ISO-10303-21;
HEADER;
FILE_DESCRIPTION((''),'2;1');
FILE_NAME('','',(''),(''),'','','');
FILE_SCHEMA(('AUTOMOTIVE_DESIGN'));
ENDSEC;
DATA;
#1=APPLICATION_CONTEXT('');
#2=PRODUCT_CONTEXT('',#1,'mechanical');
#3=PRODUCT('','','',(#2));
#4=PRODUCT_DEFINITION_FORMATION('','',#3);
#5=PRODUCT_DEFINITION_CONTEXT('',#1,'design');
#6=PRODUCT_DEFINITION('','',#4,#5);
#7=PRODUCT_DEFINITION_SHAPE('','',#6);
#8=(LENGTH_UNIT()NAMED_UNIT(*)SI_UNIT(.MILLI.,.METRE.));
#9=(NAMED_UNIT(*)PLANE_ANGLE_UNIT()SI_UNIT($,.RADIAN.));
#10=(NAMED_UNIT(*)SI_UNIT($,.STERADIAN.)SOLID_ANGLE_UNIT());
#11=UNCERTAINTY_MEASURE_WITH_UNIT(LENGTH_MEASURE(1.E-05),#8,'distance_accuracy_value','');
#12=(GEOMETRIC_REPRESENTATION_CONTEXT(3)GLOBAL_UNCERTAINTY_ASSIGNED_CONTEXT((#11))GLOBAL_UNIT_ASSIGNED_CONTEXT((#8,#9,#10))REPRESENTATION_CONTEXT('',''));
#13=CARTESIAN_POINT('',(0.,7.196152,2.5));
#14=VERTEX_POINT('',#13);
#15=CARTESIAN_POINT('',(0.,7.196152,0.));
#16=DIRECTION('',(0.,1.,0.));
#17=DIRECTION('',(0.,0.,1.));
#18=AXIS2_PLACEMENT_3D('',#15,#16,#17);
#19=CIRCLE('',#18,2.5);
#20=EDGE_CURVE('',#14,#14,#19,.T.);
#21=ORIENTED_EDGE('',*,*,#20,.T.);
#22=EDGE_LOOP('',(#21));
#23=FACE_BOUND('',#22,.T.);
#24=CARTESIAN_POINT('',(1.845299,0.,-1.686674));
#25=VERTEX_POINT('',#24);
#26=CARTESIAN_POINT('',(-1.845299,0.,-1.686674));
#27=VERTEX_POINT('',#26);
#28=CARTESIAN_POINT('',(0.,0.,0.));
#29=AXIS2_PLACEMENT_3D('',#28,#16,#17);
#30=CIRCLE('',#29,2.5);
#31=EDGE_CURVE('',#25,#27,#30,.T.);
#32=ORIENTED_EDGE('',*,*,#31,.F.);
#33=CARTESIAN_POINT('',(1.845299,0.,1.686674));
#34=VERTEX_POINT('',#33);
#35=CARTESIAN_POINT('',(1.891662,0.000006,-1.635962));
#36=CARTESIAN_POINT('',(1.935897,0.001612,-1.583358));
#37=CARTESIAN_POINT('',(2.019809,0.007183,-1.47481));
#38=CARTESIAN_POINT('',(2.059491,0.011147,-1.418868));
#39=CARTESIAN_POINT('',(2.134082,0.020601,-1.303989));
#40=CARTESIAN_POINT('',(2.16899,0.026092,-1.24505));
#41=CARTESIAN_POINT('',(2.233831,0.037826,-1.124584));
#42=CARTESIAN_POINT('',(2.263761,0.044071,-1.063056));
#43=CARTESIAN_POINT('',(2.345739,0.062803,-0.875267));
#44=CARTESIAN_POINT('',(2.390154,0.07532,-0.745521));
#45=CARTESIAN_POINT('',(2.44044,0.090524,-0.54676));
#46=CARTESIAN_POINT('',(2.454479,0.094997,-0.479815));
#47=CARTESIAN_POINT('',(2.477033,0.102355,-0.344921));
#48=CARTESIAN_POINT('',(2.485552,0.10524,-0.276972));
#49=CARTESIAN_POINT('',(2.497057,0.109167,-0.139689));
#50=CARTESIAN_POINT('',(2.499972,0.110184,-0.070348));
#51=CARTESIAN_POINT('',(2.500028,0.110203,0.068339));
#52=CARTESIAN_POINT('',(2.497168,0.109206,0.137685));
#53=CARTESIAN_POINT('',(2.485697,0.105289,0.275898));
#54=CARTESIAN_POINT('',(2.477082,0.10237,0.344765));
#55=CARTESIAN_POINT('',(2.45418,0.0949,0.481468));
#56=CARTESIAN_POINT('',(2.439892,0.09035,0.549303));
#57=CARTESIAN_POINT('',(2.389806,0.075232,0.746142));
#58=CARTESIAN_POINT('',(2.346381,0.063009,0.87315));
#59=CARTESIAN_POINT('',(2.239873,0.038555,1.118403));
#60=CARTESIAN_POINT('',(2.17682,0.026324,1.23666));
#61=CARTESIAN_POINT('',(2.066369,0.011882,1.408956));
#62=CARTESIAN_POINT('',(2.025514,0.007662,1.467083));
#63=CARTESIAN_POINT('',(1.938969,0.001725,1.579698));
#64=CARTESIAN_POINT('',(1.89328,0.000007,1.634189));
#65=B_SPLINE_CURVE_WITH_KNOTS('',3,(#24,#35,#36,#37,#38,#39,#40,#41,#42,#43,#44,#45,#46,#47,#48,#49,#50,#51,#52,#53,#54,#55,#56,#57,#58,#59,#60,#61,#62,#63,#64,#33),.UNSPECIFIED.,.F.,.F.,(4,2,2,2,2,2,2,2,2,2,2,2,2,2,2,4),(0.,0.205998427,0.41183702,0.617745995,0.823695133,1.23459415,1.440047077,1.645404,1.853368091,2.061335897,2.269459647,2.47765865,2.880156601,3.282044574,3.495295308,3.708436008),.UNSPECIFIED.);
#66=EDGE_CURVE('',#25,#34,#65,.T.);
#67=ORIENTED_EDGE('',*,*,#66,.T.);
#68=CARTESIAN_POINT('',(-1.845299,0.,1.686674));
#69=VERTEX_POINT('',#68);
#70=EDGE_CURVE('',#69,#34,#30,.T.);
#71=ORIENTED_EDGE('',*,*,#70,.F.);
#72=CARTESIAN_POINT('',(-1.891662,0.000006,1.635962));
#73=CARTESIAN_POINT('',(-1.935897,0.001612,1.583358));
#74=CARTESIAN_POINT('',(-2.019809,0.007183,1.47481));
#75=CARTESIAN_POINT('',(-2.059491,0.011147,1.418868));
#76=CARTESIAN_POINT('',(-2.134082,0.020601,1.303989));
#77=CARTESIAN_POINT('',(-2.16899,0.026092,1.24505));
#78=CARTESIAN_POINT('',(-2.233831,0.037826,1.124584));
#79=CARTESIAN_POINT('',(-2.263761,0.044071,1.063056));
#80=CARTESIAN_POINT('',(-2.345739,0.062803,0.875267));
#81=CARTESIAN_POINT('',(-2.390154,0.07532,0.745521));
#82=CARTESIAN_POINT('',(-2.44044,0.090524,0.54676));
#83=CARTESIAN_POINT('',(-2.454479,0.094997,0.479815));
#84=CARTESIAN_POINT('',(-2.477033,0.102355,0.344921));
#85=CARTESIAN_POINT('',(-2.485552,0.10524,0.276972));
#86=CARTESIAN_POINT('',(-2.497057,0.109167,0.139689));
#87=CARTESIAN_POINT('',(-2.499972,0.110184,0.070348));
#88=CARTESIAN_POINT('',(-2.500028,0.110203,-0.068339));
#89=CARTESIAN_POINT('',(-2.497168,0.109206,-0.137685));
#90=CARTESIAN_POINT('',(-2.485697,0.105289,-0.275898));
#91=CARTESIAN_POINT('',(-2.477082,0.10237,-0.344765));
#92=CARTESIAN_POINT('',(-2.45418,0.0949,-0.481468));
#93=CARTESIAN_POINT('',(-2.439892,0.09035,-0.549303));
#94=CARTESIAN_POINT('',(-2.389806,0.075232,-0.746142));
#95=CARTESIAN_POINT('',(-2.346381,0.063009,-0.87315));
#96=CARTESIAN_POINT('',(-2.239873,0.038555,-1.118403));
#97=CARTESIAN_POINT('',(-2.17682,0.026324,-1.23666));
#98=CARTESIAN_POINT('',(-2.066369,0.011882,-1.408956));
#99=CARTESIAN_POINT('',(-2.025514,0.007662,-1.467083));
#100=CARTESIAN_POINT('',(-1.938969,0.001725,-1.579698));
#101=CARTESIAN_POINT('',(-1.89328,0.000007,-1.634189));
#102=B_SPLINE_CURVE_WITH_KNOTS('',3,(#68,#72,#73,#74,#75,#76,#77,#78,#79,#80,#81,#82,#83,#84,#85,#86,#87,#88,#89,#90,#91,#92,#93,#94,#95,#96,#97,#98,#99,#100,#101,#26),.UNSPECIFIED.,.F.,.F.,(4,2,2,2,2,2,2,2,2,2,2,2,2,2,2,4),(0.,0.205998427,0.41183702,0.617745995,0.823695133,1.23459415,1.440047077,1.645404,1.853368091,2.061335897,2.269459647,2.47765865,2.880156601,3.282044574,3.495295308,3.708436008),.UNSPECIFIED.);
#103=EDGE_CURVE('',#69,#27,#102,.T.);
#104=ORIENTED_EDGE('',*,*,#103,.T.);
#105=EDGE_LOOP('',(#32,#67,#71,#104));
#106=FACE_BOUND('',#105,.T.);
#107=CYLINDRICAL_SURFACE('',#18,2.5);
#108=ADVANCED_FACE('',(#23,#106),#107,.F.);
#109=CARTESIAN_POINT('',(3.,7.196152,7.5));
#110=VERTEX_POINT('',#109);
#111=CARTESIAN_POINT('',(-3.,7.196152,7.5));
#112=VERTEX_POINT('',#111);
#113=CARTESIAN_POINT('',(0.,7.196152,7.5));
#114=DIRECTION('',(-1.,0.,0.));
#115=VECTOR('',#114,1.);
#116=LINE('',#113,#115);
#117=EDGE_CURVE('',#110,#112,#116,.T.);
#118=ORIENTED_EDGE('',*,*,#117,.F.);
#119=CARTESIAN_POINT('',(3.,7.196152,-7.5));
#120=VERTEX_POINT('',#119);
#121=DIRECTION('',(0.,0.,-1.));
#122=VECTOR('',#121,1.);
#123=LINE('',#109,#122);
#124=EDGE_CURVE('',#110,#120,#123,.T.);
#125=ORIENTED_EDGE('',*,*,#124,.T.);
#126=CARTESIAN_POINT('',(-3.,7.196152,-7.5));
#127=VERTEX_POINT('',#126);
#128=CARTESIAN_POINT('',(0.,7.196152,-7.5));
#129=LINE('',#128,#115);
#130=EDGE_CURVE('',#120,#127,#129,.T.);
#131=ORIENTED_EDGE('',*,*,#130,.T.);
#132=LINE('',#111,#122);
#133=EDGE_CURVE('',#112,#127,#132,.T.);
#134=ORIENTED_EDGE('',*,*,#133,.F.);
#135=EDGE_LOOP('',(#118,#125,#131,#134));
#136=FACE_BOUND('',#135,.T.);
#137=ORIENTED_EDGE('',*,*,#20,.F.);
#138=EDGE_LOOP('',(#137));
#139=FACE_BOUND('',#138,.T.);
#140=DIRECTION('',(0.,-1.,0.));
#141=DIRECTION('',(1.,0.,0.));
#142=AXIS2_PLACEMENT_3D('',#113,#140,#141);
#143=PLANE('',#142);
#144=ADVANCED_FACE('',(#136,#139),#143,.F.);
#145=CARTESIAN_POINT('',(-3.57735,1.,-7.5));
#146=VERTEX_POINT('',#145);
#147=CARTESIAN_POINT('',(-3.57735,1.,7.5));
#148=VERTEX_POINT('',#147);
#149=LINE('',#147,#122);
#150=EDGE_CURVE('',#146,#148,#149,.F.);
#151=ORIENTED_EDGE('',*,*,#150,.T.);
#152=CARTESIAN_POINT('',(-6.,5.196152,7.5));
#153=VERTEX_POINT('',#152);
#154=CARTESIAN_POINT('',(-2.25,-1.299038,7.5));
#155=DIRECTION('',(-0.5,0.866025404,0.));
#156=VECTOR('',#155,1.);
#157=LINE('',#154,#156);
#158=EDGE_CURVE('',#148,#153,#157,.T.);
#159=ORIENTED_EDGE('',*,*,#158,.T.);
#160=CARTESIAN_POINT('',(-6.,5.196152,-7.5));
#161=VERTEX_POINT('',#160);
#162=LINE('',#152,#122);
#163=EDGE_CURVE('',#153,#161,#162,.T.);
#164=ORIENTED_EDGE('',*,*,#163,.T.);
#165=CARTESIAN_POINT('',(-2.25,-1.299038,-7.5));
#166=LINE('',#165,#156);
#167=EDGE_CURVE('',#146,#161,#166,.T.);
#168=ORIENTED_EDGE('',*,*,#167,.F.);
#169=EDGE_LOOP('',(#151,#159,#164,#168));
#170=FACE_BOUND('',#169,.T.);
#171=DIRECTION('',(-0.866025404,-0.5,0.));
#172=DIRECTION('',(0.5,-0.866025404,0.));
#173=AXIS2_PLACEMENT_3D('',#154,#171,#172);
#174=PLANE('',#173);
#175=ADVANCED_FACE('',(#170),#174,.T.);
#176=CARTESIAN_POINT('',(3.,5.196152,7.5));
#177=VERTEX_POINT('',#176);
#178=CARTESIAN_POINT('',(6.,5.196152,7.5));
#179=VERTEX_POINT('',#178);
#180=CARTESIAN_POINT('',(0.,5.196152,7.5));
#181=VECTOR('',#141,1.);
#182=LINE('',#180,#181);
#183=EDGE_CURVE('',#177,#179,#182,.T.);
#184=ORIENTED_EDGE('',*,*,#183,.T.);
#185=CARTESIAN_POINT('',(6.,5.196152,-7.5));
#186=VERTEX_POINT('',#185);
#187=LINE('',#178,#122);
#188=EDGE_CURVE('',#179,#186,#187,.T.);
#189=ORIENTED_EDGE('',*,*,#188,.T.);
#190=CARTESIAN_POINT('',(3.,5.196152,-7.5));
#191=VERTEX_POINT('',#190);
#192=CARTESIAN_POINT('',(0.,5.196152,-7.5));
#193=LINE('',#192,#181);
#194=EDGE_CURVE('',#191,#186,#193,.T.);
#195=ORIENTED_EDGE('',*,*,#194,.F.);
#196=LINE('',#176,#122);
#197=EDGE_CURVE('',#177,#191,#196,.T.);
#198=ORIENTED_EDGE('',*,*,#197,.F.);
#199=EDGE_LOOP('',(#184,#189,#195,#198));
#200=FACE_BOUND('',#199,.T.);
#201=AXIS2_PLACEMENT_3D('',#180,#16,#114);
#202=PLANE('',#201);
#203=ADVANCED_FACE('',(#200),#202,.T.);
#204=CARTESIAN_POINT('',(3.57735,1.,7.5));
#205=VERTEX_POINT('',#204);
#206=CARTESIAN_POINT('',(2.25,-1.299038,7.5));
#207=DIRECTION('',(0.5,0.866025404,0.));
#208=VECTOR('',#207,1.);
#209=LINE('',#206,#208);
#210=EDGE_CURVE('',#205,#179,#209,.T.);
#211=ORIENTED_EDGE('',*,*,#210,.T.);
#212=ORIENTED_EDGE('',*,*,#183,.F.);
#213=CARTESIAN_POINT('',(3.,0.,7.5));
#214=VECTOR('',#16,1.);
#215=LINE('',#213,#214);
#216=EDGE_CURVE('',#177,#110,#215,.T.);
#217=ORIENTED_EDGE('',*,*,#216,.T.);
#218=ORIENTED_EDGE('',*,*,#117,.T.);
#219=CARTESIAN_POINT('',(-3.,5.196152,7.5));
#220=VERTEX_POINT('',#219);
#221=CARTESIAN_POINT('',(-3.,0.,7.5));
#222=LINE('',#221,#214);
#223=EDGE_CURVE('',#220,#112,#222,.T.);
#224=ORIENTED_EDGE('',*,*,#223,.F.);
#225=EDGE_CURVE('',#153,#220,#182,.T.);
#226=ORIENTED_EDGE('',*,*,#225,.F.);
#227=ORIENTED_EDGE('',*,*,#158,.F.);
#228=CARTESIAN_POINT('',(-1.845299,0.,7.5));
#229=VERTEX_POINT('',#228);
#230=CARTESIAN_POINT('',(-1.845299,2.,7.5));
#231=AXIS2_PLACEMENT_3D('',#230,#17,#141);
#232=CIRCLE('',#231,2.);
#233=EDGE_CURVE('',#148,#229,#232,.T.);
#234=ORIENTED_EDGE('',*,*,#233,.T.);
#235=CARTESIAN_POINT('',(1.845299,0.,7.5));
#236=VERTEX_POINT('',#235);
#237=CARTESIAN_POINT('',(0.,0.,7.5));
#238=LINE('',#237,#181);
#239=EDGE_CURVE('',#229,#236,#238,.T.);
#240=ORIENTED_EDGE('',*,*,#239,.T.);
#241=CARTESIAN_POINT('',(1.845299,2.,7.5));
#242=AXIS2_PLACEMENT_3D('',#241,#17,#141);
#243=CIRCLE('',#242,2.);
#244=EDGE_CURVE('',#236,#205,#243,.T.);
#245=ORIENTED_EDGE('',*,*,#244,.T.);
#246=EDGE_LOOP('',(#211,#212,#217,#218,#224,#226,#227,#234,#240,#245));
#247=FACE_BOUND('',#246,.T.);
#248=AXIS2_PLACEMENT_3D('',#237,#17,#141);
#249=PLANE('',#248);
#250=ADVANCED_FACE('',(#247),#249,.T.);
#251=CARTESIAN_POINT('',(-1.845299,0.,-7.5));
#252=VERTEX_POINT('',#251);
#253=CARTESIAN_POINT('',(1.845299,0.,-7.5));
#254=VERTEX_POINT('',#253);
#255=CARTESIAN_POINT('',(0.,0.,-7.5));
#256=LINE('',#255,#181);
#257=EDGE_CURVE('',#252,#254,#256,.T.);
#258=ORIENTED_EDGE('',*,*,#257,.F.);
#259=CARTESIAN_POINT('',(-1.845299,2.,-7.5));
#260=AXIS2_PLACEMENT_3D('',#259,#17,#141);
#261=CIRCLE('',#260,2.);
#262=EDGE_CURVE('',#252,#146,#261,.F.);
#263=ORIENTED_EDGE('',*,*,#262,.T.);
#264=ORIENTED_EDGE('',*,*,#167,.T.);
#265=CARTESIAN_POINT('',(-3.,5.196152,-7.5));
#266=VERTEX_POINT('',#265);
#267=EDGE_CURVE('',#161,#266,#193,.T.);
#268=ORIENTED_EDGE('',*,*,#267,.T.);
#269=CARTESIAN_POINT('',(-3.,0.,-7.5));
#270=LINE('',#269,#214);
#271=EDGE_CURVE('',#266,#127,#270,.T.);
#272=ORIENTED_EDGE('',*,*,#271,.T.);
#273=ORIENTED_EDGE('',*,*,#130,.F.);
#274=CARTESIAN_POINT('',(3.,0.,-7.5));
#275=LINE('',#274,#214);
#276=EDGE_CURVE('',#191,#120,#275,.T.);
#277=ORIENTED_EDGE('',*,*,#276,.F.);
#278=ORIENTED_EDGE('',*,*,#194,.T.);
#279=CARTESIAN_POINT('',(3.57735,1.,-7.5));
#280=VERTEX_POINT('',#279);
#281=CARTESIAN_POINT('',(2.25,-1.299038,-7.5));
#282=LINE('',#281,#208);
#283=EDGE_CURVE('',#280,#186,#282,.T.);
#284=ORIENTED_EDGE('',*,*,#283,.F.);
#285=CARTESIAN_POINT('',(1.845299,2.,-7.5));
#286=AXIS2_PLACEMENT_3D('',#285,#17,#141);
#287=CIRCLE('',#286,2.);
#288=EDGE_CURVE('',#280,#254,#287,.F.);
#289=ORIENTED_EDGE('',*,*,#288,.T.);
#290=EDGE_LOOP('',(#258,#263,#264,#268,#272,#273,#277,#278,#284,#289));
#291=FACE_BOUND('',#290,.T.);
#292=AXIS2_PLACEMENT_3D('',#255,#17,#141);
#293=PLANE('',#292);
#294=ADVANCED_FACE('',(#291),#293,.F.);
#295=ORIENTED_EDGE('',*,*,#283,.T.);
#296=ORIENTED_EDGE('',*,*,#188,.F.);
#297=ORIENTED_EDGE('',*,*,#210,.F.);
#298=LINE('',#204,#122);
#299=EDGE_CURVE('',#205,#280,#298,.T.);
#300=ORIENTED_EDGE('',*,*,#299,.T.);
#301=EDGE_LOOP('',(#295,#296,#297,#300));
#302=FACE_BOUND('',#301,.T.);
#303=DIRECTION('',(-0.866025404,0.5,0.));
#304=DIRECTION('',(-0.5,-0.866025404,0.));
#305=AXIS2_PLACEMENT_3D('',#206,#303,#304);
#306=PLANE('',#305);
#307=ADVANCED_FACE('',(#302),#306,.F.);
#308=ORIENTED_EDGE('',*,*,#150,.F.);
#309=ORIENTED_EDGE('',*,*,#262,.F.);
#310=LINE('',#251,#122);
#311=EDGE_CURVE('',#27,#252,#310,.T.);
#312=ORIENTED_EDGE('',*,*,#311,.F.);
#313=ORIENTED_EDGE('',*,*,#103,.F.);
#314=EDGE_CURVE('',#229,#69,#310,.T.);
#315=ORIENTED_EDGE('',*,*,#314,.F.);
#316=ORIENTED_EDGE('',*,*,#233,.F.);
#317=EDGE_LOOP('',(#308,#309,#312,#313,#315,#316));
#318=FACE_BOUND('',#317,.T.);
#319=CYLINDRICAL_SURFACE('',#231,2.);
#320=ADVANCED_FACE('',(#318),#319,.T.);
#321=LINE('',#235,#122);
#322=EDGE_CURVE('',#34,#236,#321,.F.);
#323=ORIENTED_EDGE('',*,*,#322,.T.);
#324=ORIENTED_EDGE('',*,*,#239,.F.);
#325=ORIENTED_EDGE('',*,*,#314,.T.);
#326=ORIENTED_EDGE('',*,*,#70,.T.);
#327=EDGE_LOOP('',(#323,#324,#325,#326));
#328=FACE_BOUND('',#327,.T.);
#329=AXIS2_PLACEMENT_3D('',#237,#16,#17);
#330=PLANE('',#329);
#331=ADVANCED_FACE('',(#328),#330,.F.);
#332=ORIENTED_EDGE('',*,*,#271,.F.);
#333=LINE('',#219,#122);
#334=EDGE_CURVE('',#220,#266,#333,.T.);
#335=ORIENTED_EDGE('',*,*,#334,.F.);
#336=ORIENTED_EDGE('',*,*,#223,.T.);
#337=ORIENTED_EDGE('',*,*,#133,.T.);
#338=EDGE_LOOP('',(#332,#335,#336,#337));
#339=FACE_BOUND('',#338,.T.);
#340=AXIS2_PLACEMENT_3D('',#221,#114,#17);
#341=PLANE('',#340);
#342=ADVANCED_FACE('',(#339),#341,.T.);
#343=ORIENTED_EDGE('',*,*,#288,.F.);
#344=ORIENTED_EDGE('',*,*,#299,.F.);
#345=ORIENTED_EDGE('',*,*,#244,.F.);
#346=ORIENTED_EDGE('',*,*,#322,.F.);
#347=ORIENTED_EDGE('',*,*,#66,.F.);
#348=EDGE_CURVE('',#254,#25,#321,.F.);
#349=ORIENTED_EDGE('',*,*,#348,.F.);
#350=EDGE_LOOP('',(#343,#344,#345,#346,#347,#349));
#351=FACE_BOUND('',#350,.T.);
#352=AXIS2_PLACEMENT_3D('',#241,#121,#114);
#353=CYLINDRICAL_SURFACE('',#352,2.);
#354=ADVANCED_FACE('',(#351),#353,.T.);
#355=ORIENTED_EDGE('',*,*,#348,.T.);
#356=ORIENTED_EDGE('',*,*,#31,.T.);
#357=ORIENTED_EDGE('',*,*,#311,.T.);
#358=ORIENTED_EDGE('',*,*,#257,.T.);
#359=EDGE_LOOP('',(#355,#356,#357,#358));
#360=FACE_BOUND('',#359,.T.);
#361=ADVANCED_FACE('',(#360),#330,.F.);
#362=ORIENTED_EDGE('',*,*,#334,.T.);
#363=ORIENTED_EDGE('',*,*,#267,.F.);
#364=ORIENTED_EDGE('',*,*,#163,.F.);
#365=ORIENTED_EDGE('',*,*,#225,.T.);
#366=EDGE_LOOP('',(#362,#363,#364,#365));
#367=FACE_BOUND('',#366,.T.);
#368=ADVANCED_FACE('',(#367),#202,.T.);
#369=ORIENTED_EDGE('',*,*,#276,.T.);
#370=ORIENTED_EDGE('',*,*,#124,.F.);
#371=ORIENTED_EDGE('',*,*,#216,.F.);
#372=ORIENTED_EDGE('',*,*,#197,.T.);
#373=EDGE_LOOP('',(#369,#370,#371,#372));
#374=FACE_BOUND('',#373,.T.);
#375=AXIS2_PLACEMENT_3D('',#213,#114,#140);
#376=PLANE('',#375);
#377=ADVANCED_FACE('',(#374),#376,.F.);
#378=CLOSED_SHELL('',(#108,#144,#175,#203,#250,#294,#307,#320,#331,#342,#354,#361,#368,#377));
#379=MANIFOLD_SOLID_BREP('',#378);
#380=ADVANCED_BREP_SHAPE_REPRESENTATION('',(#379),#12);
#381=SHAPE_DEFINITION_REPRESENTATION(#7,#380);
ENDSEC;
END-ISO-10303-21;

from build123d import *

# Parameters (mm, degrees)
BOSS_EXTRUDE1_DEPTH = 7.5
M6_TAPPED_HOLE1_D   = 5
FILLET1_R           = 2


with BuildPart() as part:
    # Sketch2 → Boss-Extrude1 (new, symmetric)
    with BuildSketch(Plane.XY):
        Polygon((-6, 5.196152423), (-3, 0), (3, 0), (6, 5.196152423), (3, 5.196152423), (3, 7.196152423), (-3, 7.196152423), (-3, 5.196152423), align=None)
    extrude(amount=BOSS_EXTRUDE1_DEPTH, both=True)

    # M6 Tapped Hole1 (through all)
    with Locations(Plane(origin=(0, 7.196152423, 0), x_dir=(1, 0, 0), z_dir=(0, 1, 0))):
        with Locations((0, 0)):
            Hole(M6_TAPPED_HOLE1_D / 2)

    # Fillet1
    # the kernel refuses this fillet: 2 mm, written as the material it takes off along each edge
    with BuildSketch(Plane(origin=(3, 0, -10.386751346), x_dir=(-1, 0, 0), z_dir=(0, 0, 1)), Plane(origin=(-3, 0, -10.386751346), x_dir=(-0.5000000000000046, 0.866025403784436, 0), z_dir=(0, 0, 1))) as fillet1_piece_1:
        with BuildLine():
            CenterArc((FILLET1_R * 0.57735026919, -FILLET1_R), FILLET1_R, 90, 60)
            Line((-FILLET1_R * 0.288675134595, -FILLET1_R * 0.5), (0, 0))
            Line((0, 0), (FILLET1_R * 0.57735026919, 0))
        make_face()
    extrude(amount=20.773502692, mode=Mode.SUBTRACT)


solid = part.part
